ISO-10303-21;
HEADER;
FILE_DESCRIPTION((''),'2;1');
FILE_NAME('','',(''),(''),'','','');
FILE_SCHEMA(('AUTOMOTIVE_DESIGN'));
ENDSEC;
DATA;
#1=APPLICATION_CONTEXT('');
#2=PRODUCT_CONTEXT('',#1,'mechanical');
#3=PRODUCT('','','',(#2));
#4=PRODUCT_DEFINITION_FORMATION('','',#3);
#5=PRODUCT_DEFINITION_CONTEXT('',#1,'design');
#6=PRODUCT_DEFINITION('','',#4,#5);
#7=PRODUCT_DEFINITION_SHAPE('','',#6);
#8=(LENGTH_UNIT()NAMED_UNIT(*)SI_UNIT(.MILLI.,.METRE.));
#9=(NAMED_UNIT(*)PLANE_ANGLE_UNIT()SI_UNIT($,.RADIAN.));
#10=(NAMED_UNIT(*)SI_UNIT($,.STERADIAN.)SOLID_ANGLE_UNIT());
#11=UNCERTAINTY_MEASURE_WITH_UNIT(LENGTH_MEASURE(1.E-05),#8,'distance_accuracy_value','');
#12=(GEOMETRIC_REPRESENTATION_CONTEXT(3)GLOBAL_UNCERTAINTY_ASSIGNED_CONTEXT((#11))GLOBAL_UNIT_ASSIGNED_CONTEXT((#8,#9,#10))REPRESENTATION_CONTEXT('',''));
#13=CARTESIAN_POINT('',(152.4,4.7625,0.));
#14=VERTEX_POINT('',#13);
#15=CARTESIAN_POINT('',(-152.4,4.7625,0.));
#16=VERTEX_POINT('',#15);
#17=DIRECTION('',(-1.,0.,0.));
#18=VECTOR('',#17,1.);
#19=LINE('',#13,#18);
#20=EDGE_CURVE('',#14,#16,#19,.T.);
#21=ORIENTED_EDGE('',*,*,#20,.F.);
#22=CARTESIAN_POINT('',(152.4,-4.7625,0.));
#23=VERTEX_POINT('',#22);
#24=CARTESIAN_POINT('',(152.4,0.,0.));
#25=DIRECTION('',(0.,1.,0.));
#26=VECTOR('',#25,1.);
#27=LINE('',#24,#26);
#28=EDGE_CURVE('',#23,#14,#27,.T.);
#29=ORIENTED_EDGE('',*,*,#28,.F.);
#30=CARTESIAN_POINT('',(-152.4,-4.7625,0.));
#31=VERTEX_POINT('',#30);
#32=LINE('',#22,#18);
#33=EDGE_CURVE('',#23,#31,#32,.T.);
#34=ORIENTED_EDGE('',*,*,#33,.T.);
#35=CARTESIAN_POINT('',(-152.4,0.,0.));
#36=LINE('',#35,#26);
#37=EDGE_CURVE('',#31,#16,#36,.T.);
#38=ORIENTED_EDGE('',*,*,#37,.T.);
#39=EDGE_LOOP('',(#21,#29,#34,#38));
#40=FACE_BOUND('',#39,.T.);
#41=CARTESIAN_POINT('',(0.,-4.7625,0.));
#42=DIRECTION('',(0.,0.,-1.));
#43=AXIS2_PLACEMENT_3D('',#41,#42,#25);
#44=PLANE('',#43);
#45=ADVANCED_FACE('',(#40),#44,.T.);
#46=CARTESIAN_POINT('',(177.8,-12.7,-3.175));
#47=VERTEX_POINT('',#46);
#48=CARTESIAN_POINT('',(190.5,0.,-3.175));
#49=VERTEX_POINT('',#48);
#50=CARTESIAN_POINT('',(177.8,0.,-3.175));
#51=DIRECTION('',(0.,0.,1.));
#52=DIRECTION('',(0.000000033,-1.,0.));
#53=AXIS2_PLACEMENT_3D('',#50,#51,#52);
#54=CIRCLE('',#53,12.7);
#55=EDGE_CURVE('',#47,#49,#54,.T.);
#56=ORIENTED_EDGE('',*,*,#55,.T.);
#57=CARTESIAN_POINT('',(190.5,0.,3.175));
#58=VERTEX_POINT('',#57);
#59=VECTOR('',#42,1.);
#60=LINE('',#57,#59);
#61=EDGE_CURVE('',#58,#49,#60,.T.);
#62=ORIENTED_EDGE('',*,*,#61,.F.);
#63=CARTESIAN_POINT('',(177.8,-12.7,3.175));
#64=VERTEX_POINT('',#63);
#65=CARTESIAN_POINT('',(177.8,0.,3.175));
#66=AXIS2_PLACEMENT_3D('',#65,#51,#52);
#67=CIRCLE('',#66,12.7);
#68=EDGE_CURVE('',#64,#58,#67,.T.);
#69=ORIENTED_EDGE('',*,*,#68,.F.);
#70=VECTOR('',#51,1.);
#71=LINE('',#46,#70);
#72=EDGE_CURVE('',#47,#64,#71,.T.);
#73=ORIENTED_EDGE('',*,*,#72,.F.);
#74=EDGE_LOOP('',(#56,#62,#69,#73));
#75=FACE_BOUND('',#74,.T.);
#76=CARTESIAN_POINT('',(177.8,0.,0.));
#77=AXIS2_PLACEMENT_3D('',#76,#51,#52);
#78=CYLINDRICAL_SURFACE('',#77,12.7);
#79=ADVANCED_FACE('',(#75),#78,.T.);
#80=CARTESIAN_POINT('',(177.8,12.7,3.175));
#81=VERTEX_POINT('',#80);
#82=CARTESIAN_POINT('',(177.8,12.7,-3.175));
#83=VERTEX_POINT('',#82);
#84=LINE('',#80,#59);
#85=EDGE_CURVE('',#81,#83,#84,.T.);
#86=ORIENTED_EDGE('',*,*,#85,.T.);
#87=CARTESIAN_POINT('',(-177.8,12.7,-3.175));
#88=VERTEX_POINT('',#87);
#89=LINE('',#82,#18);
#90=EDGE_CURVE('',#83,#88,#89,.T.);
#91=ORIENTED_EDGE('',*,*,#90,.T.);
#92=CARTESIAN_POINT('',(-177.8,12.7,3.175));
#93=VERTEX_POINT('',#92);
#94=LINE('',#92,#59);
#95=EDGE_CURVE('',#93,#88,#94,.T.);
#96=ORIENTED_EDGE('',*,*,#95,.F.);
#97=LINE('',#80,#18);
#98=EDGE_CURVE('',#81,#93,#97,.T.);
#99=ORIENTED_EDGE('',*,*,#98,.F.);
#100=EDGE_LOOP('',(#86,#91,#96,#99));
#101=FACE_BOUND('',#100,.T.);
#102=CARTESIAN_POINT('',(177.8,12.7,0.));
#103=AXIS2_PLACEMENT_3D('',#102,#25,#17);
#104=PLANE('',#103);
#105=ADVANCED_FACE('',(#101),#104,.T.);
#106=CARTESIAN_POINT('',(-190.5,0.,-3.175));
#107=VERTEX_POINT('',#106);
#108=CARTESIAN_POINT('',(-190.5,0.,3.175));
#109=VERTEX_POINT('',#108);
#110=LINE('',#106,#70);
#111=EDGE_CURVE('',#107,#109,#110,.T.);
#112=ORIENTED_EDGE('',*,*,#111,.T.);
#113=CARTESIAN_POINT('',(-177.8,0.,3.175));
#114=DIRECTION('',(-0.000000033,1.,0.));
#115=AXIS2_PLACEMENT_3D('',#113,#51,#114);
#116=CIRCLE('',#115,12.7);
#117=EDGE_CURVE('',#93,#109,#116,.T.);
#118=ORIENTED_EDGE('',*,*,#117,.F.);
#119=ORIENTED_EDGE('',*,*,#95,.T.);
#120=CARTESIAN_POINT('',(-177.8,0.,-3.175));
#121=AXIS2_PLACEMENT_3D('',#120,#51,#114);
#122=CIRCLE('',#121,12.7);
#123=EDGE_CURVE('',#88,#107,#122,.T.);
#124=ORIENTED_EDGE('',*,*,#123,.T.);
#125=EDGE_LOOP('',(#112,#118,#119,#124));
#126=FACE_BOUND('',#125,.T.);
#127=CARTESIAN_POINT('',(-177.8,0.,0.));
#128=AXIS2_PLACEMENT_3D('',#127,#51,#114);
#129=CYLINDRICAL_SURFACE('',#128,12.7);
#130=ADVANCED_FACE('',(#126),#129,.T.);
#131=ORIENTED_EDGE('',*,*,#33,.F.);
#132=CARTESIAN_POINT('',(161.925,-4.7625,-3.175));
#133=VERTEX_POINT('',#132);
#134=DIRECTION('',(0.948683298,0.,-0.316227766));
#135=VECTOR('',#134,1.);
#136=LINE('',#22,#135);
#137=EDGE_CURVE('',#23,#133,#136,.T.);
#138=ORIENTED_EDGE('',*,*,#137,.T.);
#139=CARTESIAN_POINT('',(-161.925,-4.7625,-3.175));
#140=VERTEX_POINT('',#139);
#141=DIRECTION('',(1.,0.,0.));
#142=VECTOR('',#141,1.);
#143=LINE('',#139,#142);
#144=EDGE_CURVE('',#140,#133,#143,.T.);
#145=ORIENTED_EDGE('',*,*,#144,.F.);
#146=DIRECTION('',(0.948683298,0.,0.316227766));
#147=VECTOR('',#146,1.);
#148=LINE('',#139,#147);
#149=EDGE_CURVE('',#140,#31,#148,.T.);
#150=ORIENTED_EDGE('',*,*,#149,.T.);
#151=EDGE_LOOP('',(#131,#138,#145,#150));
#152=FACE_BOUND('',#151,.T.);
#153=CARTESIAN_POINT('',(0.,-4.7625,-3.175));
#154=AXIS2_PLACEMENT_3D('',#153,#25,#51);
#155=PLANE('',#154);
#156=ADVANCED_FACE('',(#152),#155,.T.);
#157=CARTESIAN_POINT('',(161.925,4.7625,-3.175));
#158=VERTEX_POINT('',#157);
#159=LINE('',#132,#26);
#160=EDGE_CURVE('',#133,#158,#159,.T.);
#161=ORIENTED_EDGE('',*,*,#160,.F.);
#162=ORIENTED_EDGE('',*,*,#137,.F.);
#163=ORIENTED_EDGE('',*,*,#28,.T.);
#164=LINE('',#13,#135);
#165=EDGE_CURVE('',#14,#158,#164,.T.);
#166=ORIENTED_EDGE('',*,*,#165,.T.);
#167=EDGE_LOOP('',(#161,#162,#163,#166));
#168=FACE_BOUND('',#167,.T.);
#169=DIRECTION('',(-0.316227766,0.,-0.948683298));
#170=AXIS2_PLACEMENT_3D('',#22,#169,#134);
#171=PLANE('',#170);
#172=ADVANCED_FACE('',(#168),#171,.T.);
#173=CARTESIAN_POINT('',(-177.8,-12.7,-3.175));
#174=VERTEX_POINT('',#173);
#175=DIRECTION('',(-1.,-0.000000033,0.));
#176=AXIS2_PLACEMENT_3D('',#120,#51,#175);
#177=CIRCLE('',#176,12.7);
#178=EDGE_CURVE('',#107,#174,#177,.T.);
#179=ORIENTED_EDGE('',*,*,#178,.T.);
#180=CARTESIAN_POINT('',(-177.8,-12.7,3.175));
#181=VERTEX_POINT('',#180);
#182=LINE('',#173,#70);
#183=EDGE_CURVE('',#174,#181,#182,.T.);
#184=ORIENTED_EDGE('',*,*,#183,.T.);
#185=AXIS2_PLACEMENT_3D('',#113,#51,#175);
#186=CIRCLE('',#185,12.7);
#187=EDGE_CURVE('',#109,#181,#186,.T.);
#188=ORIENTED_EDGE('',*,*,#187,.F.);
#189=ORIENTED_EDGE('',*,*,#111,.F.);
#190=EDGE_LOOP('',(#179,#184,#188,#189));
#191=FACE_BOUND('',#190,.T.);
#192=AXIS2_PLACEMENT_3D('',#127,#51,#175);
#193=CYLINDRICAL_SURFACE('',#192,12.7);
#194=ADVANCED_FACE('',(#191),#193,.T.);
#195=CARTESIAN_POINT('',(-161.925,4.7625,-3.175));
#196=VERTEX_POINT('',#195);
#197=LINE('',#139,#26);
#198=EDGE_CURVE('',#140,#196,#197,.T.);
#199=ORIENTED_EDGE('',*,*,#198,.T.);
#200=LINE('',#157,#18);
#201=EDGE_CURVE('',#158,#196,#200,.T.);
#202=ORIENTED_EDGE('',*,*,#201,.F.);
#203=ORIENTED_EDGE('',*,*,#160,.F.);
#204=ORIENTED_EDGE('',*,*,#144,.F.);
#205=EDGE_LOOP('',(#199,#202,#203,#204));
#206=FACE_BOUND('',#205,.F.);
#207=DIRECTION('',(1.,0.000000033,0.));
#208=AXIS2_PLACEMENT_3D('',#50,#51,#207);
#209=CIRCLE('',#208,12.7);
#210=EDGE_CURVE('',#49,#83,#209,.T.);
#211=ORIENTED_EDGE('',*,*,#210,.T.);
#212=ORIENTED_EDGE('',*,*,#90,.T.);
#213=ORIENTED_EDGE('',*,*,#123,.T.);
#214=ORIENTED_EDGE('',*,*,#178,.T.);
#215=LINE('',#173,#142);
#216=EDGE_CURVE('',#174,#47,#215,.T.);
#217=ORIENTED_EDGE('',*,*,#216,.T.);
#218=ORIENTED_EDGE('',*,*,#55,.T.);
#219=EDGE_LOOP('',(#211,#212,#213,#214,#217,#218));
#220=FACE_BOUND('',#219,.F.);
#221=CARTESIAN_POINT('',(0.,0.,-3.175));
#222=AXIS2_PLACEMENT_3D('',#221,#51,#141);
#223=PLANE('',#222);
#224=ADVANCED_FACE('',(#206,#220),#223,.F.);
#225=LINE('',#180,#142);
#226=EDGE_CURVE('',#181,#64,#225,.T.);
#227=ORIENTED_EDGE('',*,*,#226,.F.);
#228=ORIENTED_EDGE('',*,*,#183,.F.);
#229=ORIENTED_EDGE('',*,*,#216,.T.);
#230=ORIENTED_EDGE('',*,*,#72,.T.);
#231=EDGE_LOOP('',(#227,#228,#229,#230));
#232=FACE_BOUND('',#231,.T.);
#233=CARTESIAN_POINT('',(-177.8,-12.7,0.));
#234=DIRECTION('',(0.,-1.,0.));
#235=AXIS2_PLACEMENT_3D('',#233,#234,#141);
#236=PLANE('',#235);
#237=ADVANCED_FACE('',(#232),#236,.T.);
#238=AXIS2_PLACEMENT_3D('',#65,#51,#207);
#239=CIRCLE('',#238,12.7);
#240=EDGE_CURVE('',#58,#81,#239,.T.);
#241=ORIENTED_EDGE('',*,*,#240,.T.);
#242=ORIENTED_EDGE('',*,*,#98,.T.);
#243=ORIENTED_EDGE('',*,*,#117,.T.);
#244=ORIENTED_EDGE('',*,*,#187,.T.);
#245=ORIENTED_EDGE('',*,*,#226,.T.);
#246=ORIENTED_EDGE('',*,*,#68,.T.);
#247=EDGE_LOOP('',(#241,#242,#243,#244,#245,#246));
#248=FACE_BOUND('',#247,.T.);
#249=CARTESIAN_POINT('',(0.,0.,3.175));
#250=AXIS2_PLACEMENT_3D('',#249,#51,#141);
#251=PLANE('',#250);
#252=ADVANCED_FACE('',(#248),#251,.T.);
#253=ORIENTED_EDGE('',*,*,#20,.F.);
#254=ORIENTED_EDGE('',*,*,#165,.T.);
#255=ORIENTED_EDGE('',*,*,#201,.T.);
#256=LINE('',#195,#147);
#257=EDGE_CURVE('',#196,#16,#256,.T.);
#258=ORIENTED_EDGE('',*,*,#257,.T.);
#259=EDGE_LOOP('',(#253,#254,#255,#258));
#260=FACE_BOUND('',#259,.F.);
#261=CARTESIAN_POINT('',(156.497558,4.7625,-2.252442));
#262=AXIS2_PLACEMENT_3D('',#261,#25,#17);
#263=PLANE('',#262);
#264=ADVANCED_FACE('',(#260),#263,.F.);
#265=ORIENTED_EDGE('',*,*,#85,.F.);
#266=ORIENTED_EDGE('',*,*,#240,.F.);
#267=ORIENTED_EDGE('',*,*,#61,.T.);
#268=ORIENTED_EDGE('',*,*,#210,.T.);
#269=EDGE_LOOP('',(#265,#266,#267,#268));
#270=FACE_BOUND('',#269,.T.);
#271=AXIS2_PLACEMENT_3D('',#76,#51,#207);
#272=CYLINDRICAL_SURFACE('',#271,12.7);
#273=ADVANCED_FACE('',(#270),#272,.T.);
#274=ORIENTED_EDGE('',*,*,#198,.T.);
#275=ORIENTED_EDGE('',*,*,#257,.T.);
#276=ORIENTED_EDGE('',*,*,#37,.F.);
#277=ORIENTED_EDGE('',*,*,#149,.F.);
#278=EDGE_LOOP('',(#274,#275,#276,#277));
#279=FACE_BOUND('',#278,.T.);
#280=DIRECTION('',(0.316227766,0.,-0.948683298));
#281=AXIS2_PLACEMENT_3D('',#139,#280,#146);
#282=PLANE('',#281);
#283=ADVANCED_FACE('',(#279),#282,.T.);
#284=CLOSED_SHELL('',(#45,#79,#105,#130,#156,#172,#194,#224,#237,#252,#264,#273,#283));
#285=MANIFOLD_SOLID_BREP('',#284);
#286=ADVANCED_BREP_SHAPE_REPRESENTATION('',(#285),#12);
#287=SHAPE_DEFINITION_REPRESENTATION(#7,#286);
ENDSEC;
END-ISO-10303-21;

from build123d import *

# Parameters (mm, degrees)
F1_DEPTH = 3.175
F2_W     = 9.525
F2_H     = 3.175
F3_DEPTH = 152.4
F5_DEPTH = 9.525


# Not quite as in the source:
# - a length typed as a fraction of an inch, garbled in the dataset ("3 / 203.2 mm" for 3/8 in), is restored
# - a feature names something its author has since deleted; it is built from what else it names


with BuildPart() as f1:
    # F0 (on Top) → F1 (new body, symmetric)
    with BuildSketch(Plane.XY):
        with BuildLine():
            Line((-152.4, 12.7), (-177.8, 12.7))
            ThreePointArc((-177.8, 12.7), (-186.780256, 8.980256), (-190.5, 0))
            ThreePointArc((-190.5, 0), (-186.780256, -8.980256), (-177.8, -12.7))
            Line((-177.8, -12.7), (-152.4, -12.7))
            Line((-152.4, -12.7), (152.4, -12.7))
            Line((152.4, -12.7), (177.8, -12.7))
            ThreePointArc((177.8, -12.7), (186.780256, -8.980256), (190.5, 0))
            ThreePointArc((190.5, 0), (186.780256, 8.980256), (177.8, 12.7))
            Line((177.8, 12.7), (152.4, 12.7))
            Line((152.4, 12.7), (-152.4, 12.7))
        make_face()
    extrude(amount=F1_DEPTH, both=True)

    # F2 (on Right) → F3 (cut, symmetric)
    with BuildSketch(Plane.YZ):
        with Locations((0, -1.5875)):
            Rectangle(F2_W, F2_H)
    extrude(amount=F3_DEPTH, both=True, mode=Mode.SUBTRACT)

    # F4 (on face) → F5 (cut)
    with BuildSketch(Plane(origin=(0, -4.7625, 0), x_dir=(-1, 0, 0), z_dir=(0, 1, 0))):
        Polygon((161.925, -3.175), (152.4, 0), (152.4, -3.175), align=None)
        Polygon((-152.4, -3.175), (-152.4, 0), (-161.925, -3.175), align=None)
    extrude(amount=F5_DEPTH, mode=Mode.SUBTRACT)


solid = f1.part
